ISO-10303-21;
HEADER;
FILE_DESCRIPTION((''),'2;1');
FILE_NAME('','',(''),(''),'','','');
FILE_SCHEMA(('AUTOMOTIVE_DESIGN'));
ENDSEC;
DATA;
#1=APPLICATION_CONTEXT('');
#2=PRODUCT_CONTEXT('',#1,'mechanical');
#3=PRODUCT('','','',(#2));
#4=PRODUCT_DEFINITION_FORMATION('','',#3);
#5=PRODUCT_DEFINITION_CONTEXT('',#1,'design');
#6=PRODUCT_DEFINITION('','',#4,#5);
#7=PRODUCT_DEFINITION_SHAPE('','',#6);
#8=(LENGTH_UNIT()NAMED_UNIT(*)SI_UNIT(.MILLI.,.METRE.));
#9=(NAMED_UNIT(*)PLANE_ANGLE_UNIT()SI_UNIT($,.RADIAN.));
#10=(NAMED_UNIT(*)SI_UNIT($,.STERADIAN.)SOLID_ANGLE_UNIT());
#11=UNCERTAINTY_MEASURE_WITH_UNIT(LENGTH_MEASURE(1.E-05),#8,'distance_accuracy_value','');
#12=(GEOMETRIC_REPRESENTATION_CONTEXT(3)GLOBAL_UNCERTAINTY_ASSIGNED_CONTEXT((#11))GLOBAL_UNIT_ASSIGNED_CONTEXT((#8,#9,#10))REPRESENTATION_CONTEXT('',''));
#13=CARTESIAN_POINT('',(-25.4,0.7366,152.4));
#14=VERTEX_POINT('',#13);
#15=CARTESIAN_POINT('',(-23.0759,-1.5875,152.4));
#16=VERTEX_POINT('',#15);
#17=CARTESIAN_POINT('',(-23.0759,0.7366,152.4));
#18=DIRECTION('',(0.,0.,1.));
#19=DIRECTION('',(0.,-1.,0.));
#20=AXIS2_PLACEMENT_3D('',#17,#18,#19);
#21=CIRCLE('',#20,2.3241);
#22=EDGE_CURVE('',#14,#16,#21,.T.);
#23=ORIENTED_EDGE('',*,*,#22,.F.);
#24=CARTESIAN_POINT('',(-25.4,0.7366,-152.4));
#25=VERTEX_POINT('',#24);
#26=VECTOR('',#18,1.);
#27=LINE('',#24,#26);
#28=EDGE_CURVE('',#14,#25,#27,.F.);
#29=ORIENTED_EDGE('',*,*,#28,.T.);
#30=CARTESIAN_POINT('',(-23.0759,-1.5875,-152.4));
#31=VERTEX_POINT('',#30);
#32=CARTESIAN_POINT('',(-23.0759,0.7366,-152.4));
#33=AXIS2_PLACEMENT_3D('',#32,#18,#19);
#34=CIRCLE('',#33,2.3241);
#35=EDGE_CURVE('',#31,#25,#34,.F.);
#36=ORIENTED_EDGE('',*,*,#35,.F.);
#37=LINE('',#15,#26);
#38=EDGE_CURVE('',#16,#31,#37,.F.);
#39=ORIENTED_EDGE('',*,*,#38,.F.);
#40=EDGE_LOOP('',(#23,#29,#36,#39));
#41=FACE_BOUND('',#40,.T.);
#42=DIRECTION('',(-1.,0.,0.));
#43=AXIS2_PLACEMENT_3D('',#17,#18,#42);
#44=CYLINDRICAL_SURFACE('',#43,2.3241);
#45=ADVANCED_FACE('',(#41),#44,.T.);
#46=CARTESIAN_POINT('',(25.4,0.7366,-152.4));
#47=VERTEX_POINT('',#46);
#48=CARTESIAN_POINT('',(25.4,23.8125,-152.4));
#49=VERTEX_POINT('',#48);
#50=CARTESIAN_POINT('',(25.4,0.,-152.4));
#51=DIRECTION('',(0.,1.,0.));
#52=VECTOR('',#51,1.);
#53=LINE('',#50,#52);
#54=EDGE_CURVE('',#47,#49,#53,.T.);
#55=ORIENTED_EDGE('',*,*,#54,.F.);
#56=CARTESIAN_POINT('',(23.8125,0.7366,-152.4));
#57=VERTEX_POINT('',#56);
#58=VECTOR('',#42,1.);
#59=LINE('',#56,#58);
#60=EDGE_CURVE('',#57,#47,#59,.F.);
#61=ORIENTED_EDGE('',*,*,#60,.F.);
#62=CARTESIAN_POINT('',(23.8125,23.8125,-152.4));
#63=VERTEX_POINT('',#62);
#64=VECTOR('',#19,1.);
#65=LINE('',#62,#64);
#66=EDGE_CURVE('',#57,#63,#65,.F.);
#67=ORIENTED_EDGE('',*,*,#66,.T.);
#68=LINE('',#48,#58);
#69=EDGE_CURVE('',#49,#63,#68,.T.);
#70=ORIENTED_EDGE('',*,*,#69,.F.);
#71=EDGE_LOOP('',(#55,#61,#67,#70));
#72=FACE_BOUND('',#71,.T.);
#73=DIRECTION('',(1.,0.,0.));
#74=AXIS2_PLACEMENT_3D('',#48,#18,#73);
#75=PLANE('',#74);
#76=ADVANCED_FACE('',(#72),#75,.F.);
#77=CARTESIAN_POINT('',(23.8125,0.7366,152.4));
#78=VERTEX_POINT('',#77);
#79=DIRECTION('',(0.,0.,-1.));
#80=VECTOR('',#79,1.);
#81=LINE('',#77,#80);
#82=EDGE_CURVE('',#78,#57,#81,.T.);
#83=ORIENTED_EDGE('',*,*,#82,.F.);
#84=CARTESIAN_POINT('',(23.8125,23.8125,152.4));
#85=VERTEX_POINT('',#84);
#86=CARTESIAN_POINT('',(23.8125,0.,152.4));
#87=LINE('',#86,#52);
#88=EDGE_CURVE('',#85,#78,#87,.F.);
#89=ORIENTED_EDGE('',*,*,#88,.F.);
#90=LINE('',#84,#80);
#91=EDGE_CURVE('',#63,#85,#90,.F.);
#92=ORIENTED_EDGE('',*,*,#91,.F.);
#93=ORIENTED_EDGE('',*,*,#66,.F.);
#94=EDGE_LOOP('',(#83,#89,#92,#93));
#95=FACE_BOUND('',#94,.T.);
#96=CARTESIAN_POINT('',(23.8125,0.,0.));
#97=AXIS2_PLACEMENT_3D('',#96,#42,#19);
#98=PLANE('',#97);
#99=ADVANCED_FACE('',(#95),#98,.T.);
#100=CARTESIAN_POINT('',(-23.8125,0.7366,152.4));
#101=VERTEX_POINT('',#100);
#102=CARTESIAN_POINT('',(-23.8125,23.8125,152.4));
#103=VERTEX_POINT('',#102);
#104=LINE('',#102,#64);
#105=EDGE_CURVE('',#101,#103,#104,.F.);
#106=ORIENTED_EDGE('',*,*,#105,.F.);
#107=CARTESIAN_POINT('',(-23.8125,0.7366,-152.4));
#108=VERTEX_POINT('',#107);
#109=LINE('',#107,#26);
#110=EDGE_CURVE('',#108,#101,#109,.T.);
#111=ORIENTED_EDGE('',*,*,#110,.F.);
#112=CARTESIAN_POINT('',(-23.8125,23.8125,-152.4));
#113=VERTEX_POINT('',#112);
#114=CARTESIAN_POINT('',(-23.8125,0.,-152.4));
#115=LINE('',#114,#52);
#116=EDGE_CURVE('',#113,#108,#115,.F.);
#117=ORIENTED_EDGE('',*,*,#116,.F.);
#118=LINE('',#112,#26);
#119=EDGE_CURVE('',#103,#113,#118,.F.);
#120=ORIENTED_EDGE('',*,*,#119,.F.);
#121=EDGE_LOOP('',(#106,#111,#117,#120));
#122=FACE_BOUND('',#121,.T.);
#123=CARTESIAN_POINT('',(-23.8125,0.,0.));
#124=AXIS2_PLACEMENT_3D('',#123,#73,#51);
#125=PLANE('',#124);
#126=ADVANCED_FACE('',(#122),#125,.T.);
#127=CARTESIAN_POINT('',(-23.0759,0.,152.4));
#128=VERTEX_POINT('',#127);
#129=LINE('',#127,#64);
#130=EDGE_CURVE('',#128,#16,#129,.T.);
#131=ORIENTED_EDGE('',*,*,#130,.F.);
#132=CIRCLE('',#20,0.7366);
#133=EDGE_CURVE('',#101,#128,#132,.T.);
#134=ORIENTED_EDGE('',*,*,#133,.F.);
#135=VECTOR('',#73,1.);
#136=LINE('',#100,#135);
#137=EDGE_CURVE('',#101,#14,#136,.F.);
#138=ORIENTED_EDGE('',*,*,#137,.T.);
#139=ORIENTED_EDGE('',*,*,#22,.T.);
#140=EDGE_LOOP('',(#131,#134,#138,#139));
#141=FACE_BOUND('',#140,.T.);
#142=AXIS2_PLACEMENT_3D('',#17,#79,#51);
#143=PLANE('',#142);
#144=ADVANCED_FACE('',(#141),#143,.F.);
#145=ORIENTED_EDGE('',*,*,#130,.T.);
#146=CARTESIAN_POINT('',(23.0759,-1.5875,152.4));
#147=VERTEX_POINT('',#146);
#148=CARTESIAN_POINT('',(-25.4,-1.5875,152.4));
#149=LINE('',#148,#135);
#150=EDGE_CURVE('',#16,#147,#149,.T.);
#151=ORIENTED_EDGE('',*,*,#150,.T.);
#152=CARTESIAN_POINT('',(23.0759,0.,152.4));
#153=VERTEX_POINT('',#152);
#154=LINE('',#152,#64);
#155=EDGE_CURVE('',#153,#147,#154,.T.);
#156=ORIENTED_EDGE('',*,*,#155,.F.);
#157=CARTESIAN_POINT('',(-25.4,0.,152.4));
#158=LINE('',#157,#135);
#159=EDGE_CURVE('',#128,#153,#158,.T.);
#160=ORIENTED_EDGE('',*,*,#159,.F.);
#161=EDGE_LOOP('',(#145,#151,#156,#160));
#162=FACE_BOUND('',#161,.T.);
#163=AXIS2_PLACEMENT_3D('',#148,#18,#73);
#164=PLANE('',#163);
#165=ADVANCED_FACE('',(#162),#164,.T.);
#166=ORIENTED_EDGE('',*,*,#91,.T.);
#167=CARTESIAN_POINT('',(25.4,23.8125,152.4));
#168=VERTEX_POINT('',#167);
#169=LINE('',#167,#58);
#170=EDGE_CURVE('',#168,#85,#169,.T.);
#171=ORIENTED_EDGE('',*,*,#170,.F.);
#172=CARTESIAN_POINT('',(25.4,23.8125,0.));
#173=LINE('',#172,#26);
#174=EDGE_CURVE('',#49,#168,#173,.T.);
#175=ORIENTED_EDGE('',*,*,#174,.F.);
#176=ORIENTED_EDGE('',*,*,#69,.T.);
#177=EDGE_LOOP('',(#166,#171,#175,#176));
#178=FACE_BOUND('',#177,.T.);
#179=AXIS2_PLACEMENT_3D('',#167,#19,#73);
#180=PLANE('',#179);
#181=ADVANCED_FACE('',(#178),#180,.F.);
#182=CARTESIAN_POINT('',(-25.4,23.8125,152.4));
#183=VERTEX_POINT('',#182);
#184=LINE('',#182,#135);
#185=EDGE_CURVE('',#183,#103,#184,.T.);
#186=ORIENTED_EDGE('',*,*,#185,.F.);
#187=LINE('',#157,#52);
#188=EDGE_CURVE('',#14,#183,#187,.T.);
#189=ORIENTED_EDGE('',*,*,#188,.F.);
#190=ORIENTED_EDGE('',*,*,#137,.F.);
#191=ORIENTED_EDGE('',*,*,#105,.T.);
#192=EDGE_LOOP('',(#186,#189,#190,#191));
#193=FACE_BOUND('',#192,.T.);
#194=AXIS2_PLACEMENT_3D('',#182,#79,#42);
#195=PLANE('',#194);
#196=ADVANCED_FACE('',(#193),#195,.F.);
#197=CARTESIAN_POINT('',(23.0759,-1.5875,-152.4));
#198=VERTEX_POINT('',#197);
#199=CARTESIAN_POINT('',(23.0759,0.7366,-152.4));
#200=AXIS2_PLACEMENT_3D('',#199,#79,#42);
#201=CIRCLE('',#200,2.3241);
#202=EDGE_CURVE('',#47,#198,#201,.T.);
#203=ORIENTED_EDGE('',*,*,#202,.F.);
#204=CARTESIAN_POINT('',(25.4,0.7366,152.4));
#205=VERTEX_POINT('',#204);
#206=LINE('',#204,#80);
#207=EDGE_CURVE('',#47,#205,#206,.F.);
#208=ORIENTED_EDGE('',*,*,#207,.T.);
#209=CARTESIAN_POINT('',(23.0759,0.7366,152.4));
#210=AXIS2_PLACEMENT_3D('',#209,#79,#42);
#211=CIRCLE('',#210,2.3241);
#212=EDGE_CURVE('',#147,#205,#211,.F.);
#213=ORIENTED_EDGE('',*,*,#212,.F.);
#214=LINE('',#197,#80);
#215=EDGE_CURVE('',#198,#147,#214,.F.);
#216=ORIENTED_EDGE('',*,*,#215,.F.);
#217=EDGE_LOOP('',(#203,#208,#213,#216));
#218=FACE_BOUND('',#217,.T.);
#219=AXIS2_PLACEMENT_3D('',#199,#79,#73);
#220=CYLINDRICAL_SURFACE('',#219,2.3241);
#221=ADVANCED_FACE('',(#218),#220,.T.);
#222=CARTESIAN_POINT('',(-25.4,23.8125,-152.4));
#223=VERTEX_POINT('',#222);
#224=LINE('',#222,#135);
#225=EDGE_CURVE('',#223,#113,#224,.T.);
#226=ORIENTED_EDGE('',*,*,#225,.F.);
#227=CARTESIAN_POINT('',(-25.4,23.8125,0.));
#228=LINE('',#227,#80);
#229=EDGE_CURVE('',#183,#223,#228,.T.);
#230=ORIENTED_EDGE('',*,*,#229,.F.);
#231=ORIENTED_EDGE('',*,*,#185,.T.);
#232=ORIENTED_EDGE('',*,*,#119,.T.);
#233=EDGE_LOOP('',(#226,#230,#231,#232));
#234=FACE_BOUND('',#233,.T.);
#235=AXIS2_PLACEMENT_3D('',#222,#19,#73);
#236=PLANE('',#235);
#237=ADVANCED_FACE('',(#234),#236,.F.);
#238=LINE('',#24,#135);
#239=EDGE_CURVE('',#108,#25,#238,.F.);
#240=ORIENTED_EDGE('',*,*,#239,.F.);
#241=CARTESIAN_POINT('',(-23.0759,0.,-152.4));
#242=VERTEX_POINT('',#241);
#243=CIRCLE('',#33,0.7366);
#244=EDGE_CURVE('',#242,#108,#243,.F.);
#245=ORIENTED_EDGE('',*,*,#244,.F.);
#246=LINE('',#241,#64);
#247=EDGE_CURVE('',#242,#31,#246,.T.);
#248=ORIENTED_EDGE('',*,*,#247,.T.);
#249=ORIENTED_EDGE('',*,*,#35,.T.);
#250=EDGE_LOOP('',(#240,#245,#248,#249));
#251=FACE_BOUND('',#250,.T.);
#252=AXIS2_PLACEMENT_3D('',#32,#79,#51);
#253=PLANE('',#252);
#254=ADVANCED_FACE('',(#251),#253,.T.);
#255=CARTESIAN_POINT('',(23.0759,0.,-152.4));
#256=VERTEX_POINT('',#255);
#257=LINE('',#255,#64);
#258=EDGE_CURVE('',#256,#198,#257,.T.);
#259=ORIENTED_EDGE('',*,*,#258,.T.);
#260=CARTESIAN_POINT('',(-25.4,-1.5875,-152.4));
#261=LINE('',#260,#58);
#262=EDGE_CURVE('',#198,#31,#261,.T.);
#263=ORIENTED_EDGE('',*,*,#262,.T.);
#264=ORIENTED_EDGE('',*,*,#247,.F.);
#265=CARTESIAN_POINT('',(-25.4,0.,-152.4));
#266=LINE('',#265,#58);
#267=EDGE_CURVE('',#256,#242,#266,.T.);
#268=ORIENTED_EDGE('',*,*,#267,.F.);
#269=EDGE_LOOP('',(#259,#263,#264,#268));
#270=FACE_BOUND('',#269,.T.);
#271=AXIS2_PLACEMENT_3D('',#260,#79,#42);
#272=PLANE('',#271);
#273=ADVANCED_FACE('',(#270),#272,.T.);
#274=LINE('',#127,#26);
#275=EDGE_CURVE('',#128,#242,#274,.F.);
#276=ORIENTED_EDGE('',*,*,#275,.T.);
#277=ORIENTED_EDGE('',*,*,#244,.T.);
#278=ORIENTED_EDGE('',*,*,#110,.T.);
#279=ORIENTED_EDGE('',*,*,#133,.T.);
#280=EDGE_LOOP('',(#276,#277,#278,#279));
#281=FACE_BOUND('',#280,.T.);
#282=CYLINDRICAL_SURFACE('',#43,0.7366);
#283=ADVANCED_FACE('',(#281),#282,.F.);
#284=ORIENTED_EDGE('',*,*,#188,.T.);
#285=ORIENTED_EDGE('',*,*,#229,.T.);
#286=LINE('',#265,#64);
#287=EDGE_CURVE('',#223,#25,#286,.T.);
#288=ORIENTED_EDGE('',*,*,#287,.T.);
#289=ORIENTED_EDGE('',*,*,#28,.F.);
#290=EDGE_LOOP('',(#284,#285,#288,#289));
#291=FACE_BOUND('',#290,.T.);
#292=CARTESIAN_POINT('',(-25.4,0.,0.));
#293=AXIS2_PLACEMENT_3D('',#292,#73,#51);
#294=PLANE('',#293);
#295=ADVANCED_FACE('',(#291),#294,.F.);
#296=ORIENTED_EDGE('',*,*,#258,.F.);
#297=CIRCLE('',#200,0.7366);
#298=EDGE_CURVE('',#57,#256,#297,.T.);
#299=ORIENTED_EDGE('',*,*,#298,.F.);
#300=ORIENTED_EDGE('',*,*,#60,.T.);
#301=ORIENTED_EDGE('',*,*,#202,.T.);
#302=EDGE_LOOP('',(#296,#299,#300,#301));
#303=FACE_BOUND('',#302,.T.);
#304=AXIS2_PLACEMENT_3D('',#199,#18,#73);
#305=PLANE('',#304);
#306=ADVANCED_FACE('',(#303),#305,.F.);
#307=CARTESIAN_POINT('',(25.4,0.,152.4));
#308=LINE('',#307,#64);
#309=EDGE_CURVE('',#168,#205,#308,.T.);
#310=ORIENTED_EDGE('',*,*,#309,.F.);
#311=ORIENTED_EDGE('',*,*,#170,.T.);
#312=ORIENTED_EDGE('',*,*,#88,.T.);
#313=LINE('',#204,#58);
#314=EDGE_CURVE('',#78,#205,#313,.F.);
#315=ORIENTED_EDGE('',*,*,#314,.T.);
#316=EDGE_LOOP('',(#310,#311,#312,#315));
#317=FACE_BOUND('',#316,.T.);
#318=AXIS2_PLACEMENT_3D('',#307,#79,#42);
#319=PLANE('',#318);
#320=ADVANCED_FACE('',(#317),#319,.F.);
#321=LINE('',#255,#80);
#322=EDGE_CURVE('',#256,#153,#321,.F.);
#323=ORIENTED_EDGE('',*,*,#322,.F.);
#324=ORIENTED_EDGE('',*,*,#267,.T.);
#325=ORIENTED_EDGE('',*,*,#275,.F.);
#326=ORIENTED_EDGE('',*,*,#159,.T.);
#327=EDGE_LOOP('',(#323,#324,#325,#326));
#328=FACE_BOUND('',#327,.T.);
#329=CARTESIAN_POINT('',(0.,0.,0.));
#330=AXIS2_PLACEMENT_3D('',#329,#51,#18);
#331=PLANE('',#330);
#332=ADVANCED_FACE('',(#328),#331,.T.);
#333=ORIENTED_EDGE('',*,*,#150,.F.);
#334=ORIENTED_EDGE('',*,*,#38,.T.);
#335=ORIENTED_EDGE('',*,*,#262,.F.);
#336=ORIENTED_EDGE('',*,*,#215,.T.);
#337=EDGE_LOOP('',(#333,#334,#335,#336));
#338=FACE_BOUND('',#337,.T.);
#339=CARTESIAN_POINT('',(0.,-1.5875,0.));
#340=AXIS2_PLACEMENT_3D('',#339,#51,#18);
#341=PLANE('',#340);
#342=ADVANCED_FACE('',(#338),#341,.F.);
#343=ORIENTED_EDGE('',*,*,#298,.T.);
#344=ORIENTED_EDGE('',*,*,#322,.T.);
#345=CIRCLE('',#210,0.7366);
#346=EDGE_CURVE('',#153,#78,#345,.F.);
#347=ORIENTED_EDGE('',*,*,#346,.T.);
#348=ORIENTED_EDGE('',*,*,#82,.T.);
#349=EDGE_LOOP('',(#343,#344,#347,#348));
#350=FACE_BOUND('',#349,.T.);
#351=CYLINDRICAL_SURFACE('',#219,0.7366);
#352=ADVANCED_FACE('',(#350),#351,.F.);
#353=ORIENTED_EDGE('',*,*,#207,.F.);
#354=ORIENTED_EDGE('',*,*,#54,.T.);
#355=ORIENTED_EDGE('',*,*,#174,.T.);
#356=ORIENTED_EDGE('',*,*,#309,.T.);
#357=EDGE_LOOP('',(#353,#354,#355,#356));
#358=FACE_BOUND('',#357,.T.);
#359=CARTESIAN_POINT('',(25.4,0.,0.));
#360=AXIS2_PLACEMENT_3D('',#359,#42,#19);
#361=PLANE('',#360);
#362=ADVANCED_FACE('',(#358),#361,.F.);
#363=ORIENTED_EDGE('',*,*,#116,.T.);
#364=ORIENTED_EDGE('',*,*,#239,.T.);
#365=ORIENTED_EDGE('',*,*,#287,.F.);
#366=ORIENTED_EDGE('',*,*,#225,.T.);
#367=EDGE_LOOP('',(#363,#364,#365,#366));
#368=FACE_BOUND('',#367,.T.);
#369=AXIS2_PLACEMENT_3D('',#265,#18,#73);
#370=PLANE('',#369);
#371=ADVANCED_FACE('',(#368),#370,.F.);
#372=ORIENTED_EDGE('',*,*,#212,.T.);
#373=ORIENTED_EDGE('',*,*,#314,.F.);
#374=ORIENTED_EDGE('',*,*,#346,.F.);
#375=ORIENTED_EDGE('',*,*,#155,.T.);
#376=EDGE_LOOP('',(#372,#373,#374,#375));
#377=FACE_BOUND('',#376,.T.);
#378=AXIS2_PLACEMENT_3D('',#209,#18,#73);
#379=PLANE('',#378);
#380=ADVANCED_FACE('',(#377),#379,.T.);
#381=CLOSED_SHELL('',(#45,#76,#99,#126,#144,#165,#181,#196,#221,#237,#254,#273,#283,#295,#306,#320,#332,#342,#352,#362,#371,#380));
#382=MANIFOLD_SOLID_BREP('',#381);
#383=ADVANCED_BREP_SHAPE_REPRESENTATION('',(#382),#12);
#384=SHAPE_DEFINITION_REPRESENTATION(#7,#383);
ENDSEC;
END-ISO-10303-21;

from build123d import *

# Parameters (mm, degrees)
SKETCH1_W                    = 50.8
SKETCH1_H                    = 304.8
BASE_FLANGE1_DEPTH           = 1.5875
EDGE_FLANGE1_STRIP_W         = 7.8232
EDGE_FLANGE1_STRIP_H         = 1.5875
EDGE_FLANGE1_STRIP_CUT_DEPTH = 304.8
EDGE_FLANGE1_DEPTH           = 304.8
EDGE_FLANGE2_STRIP_W         = 7.8232
EDGE_FLANGE2_STRIP_H         = 1.5875
EDGE_FLANGE2_STRIP_CUT_DEPTH = 304.8
EDGE_FLANGE2_DEPTH           = 304.8


# Sheet-metal steps are written as plain solids
with BuildPart() as part:
    # Sketch1 → Base-Flange1 (new body)
    with BuildSketch(Plane(origin=(0, 0, 0), x_dir=(1, 0, 0), z_dir=(0, 1, 0))):
        Rectangle(SKETCH1_W, SKETCH1_H)
    extrude(amount=-BASE_FLANGE1_DEPTH)

    # Edge-Flange1 strip (across the edge) → Edge-Flange1 strip cut (cut)
    with BuildSketch(Plane(origin=(25.4, 0, 152.4), x_dir=(-1, 0, 0), z_dir=(0, 0, -1))):
        with Locations((-1.5875, -0.79375)):
            Rectangle(EDGE_FLANGE1_STRIP_W, EDGE_FLANGE1_STRIP_H)
    extrude(amount=EDGE_FLANGE1_STRIP_CUT_DEPTH, mode=Mode.SUBTRACT)

    # Edge-Flange1 section (across the edge) → Edge-Flange1 (add)
    with BuildSketch(Plane(origin=(25.4, 0, 152.4), x_dir=(-1, 0, 0), z_dir=(0, 0, -1))):
        with BuildLine():
            Line((0, 0.7366), (0, 23.8125))
            Line((0, 23.8125), (1.5875, 23.8125))
            Line((1.5875, 23.8125), (1.5875, 0.7366))
            ThreePointArc((1.5875, 0.7366), (1.803245145, 0.215745145), (2.3241, 0))
            Line((2.3241, 0), (2.3241, -1.5875))
            ThreePointArc((2.3241, -1.5875), (0.68071313, -0.90678687), (0, 0.7366))
        make_face()
    extrude(amount=EDGE_FLANGE1_DEPTH)

    # Edge-Flange2 strip (across the edge) → Edge-Flange2 strip cut (cut)
    with BuildSketch(Plane(origin=(-25.4, 0, -152.4), x_dir=(1, 0, 0), z_dir=(0, 0, 1))):
        with Locations((-1.5875, -0.79375)):
            Rectangle(EDGE_FLANGE2_STRIP_W, EDGE_FLANGE2_STRIP_H)
    extrude(amount=EDGE_FLANGE2_STRIP_CUT_DEPTH, mode=Mode.SUBTRACT)

    # Edge-Flange2 section (across the edge) → Edge-Flange2 (add)
    with BuildSketch(Plane(origin=(-25.4, 0, -152.4), x_dir=(1, 0, 0), z_dir=(0, 0, 1))):
        with BuildLine():
            Line((0, 0.7366), (0, 23.8125))
            Line((0, 23.8125), (1.5875, 23.8125))
            Line((1.5875, 23.8125), (1.5875, 0.7366))
            ThreePointArc((1.5875, 0.7366), (1.803245145, 0.215745145), (2.3241, 0))
            Line((2.3241, 0), (2.3241, -1.5875))
            ThreePointArc((2.3241, -1.5875), (0.68071313, -0.90678687), (0, 0.7366))
        make_face()
    extrude(amount=EDGE_FLANGE2_DEPTH)


solid = part.part
